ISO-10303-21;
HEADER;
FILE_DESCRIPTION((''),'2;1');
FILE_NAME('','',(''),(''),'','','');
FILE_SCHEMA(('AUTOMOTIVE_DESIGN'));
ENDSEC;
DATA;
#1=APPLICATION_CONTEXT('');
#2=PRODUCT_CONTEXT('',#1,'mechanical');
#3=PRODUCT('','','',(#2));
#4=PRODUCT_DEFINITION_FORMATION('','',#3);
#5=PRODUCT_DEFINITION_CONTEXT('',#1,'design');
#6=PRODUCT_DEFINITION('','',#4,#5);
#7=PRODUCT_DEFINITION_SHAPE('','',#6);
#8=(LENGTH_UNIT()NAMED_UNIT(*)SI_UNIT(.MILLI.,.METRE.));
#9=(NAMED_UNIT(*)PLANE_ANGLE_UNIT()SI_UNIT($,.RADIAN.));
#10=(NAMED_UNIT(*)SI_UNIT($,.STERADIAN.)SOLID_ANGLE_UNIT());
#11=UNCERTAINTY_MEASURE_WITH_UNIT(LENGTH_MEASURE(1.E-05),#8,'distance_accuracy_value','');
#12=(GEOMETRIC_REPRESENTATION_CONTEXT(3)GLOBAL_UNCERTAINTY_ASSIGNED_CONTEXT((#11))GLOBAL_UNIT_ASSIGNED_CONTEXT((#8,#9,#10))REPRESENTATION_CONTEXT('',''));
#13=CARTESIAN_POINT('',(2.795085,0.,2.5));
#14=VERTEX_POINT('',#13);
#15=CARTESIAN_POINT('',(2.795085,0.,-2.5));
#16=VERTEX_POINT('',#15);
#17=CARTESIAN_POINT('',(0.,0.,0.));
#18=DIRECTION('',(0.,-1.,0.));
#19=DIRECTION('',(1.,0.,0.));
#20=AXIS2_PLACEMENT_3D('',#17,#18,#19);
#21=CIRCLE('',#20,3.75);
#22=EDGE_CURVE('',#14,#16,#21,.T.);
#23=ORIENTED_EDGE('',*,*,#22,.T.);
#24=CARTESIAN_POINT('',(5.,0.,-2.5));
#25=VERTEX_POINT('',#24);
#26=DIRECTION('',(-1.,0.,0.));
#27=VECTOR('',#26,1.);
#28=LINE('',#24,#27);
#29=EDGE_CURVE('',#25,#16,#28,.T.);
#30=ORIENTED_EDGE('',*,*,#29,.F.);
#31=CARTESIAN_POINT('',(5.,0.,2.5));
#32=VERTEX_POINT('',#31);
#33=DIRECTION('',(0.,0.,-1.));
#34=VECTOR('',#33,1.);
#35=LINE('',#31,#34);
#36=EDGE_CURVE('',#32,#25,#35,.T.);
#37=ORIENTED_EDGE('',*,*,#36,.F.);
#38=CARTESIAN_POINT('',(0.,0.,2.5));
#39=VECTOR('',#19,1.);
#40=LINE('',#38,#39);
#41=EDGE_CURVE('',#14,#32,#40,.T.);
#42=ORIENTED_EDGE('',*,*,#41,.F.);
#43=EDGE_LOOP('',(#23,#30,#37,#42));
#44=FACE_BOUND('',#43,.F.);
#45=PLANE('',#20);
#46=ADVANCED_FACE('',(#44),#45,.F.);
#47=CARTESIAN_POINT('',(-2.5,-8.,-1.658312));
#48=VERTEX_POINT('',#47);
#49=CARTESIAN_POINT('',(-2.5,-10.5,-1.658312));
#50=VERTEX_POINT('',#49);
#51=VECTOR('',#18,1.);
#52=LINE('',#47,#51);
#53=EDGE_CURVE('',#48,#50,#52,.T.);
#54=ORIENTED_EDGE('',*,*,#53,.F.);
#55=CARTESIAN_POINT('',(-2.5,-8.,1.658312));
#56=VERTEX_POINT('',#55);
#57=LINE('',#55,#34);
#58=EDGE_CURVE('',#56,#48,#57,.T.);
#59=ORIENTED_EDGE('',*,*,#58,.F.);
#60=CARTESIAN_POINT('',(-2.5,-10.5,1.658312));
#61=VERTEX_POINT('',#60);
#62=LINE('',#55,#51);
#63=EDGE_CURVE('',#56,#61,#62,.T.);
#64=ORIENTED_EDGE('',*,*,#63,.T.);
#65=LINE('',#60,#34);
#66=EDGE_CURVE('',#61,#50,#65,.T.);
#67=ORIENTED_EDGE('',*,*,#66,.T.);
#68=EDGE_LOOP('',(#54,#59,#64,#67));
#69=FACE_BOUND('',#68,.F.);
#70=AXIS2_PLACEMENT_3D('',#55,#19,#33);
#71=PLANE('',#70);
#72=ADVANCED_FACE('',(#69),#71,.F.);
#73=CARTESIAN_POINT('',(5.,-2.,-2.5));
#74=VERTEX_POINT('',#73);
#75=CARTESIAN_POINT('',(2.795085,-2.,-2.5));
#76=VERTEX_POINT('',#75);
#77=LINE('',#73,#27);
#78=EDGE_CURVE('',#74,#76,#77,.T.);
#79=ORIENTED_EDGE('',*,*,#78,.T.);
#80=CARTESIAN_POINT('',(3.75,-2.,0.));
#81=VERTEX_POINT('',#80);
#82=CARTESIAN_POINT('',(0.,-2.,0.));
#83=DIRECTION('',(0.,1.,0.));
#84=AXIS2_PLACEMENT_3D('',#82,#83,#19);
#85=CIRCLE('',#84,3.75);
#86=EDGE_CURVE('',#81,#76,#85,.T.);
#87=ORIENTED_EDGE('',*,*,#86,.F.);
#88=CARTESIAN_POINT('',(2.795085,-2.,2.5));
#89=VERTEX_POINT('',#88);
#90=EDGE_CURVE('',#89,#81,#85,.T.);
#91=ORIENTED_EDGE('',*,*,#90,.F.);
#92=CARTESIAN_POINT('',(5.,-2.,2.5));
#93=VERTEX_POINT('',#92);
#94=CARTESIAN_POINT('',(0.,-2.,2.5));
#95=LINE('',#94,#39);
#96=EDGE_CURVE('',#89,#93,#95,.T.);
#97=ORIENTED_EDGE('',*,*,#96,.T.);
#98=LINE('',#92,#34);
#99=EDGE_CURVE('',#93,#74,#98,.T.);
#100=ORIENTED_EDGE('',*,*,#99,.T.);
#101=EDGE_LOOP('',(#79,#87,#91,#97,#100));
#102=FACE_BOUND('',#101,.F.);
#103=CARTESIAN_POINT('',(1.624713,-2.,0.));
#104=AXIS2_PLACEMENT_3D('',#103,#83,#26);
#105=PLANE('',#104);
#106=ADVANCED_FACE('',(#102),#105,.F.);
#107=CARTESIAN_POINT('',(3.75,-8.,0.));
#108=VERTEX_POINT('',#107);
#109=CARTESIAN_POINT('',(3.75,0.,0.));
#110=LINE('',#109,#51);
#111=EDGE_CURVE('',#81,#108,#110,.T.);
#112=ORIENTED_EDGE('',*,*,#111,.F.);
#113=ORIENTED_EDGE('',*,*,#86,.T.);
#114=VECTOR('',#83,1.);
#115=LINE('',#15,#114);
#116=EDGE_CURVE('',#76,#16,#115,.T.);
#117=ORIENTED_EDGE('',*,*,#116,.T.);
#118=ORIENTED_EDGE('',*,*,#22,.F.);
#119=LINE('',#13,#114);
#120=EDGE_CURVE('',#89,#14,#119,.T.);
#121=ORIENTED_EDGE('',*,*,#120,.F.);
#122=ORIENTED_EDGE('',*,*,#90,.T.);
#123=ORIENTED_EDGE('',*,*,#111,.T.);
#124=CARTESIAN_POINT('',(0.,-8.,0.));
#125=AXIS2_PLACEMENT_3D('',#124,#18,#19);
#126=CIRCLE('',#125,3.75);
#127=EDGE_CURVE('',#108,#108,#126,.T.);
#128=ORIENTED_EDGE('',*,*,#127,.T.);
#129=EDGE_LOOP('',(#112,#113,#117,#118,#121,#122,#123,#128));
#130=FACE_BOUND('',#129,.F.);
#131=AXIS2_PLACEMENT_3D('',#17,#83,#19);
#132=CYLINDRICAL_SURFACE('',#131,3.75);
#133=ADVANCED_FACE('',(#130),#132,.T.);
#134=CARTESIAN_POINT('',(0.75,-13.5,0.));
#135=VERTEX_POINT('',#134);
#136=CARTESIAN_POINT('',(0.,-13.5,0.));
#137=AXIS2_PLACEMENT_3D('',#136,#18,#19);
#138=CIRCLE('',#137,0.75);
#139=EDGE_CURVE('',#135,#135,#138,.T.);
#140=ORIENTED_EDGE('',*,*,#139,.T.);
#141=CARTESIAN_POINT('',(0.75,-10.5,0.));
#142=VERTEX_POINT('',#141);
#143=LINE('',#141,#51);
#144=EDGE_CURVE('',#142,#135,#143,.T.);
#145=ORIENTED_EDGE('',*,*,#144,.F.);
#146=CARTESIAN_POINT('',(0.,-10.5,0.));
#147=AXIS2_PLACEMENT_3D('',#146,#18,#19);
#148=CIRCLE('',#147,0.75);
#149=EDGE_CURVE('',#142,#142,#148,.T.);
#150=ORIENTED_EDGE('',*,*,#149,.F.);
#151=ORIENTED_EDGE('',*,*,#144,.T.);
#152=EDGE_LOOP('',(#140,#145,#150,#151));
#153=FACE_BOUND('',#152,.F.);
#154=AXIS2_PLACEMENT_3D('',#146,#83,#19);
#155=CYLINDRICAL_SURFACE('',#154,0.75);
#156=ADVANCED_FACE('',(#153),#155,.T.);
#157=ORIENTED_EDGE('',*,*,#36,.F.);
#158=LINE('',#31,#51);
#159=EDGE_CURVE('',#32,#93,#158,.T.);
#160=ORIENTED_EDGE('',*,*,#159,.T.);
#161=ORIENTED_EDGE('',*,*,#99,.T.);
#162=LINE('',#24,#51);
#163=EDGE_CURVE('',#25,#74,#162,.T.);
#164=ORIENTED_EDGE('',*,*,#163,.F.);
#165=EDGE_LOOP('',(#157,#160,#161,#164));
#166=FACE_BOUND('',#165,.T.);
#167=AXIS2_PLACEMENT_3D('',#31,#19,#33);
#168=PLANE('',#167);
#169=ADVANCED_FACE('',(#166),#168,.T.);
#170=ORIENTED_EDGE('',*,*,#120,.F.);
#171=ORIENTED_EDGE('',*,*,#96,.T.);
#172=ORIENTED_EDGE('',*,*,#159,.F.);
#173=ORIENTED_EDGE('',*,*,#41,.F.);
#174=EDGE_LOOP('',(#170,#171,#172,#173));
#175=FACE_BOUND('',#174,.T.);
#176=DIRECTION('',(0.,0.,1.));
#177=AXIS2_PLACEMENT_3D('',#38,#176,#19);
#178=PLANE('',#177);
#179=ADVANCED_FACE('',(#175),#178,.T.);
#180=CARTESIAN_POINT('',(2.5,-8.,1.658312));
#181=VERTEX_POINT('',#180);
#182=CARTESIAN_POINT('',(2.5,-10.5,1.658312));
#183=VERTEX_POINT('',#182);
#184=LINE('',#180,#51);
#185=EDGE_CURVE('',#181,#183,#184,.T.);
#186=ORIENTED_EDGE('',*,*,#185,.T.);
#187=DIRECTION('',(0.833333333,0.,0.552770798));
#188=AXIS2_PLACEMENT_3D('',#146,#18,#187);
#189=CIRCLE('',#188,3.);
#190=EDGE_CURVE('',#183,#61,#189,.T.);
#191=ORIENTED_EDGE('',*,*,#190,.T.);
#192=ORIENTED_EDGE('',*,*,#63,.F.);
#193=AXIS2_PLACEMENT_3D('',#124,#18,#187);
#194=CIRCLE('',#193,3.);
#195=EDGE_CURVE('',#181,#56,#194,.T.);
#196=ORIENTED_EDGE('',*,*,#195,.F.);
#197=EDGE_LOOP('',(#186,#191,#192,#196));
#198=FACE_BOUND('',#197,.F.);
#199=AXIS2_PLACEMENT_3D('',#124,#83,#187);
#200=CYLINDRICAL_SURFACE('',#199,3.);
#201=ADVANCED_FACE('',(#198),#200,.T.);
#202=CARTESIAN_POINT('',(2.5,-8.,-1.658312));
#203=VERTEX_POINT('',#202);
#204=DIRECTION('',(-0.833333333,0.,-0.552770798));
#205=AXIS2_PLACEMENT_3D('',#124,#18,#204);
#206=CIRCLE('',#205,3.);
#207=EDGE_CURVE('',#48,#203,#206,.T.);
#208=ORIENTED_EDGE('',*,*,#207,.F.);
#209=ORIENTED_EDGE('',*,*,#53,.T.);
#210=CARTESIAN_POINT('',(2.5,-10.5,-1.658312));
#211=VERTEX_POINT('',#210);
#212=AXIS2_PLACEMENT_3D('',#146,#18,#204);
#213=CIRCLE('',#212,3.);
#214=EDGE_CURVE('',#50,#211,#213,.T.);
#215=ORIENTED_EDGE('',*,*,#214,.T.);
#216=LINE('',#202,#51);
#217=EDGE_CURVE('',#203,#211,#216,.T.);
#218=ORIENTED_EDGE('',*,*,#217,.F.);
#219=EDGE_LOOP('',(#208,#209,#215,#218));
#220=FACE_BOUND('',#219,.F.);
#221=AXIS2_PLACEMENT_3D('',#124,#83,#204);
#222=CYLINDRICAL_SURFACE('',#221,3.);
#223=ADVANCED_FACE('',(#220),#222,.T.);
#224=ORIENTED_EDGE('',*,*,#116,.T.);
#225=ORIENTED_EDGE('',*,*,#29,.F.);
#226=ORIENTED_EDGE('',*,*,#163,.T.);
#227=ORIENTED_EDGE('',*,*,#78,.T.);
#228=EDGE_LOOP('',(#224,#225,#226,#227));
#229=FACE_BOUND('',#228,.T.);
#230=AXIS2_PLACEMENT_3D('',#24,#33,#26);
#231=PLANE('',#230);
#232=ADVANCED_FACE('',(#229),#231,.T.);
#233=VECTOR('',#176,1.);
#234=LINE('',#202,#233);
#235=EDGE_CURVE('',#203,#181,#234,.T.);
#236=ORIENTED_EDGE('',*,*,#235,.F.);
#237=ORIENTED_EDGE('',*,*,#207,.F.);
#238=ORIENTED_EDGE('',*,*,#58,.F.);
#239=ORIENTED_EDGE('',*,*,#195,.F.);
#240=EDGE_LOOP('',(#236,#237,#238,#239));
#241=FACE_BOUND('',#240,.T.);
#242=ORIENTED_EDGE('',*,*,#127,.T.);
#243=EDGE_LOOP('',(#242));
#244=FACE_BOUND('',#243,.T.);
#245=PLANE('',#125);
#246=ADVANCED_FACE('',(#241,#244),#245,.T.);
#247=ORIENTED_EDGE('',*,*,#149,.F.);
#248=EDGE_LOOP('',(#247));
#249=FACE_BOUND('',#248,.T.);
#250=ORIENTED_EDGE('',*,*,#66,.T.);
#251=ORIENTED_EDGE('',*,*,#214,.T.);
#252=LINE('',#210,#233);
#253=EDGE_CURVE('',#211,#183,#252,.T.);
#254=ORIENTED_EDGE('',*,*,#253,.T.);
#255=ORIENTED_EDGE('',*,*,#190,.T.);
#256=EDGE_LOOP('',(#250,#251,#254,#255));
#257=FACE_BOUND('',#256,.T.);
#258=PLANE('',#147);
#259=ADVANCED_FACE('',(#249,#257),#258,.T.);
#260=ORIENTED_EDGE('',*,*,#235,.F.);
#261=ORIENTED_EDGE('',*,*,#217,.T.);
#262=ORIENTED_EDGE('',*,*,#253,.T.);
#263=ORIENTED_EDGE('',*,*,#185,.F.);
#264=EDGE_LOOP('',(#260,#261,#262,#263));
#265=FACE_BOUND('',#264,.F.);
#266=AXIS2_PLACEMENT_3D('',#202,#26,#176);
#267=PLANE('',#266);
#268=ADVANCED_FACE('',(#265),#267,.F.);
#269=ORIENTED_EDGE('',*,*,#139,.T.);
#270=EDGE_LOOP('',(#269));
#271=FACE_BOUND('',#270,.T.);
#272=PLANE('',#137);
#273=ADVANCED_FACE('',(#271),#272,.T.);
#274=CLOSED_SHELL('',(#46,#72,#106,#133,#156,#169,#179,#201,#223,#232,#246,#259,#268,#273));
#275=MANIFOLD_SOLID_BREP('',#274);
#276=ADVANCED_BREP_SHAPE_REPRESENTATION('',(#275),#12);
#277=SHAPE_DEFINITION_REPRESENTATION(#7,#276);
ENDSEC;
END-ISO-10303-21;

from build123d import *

# Parameters (mm, degrees)
F0_R     = 3.75
F1_DEPTH = 8
F3_DEPTH = 2.5
F4_R     = 0.75
F5_DEPTH = 3
F7_DEPTH = 2


# Not quite as in the source:
# - a feature names something its author has since deleted; it is built from what else it names


with BuildPart() as f1:
    # F0 (on Front) → F1 (new body)
    with BuildSketch(Plane.XZ):
        Circle(F0_R)
    extrude(amount=F1_DEPTH)

    # F2 (on face) → F3 (join)
    with BuildSketch(Plane.XZ.offset(8)):
        with BuildLine():
            Line((-2.5, 1.6583123952), (-2.5, -1.6583123952))
            ThreePointArc((-2.5, -1.6583123952), (0, -3), (2.5, -1.6583123952))
            Line((2.5, -1.6583123952), (2.5, 1.6583123952))
            ThreePointArc((2.5, 1.6583123952), (0, 3), (-2.5, 1.6583123952))
        make_face()
    extrude(amount=F3_DEPTH)

    # F4 (on face) → F5 (join)
    with BuildSketch(Plane.XZ.offset(10.5)):
        Circle(F4_R)
    extrude(amount=F5_DEPTH)

    # F6 (on face) → F7 (join)
    with BuildSketch(Plane(origin=(0, 0, 0), x_dir=(-1, 0, 0), z_dir=(0, 1, 0))):
        with BuildLine():
            Line((0, 2.5), (-2.7950849719, 2.5))
            ThreePointArc((-2.7950849719, 2.5), (-3.75, 0), (-2.7950849719, -2.5))
            Line((-2.7950849719, -2.5), (0, -2.5))
            Line((0, -2.5), (0, 2.5))
        make_face()
        with BuildLine():
            Line((-2.7950849719, 2.5), (-5, 2.5))
            Line((-5, 2.5), (-5, -2.5))
            Line((-5, -2.5), (-2.7950849719, -2.5))
            ThreePointArc((-2.7950849719, -2.5), (-3.75, 0), (-2.7950849719, 2.5))
        make_face()
    extrude(amount=-F7_DEPTH)


solid = f1.part
